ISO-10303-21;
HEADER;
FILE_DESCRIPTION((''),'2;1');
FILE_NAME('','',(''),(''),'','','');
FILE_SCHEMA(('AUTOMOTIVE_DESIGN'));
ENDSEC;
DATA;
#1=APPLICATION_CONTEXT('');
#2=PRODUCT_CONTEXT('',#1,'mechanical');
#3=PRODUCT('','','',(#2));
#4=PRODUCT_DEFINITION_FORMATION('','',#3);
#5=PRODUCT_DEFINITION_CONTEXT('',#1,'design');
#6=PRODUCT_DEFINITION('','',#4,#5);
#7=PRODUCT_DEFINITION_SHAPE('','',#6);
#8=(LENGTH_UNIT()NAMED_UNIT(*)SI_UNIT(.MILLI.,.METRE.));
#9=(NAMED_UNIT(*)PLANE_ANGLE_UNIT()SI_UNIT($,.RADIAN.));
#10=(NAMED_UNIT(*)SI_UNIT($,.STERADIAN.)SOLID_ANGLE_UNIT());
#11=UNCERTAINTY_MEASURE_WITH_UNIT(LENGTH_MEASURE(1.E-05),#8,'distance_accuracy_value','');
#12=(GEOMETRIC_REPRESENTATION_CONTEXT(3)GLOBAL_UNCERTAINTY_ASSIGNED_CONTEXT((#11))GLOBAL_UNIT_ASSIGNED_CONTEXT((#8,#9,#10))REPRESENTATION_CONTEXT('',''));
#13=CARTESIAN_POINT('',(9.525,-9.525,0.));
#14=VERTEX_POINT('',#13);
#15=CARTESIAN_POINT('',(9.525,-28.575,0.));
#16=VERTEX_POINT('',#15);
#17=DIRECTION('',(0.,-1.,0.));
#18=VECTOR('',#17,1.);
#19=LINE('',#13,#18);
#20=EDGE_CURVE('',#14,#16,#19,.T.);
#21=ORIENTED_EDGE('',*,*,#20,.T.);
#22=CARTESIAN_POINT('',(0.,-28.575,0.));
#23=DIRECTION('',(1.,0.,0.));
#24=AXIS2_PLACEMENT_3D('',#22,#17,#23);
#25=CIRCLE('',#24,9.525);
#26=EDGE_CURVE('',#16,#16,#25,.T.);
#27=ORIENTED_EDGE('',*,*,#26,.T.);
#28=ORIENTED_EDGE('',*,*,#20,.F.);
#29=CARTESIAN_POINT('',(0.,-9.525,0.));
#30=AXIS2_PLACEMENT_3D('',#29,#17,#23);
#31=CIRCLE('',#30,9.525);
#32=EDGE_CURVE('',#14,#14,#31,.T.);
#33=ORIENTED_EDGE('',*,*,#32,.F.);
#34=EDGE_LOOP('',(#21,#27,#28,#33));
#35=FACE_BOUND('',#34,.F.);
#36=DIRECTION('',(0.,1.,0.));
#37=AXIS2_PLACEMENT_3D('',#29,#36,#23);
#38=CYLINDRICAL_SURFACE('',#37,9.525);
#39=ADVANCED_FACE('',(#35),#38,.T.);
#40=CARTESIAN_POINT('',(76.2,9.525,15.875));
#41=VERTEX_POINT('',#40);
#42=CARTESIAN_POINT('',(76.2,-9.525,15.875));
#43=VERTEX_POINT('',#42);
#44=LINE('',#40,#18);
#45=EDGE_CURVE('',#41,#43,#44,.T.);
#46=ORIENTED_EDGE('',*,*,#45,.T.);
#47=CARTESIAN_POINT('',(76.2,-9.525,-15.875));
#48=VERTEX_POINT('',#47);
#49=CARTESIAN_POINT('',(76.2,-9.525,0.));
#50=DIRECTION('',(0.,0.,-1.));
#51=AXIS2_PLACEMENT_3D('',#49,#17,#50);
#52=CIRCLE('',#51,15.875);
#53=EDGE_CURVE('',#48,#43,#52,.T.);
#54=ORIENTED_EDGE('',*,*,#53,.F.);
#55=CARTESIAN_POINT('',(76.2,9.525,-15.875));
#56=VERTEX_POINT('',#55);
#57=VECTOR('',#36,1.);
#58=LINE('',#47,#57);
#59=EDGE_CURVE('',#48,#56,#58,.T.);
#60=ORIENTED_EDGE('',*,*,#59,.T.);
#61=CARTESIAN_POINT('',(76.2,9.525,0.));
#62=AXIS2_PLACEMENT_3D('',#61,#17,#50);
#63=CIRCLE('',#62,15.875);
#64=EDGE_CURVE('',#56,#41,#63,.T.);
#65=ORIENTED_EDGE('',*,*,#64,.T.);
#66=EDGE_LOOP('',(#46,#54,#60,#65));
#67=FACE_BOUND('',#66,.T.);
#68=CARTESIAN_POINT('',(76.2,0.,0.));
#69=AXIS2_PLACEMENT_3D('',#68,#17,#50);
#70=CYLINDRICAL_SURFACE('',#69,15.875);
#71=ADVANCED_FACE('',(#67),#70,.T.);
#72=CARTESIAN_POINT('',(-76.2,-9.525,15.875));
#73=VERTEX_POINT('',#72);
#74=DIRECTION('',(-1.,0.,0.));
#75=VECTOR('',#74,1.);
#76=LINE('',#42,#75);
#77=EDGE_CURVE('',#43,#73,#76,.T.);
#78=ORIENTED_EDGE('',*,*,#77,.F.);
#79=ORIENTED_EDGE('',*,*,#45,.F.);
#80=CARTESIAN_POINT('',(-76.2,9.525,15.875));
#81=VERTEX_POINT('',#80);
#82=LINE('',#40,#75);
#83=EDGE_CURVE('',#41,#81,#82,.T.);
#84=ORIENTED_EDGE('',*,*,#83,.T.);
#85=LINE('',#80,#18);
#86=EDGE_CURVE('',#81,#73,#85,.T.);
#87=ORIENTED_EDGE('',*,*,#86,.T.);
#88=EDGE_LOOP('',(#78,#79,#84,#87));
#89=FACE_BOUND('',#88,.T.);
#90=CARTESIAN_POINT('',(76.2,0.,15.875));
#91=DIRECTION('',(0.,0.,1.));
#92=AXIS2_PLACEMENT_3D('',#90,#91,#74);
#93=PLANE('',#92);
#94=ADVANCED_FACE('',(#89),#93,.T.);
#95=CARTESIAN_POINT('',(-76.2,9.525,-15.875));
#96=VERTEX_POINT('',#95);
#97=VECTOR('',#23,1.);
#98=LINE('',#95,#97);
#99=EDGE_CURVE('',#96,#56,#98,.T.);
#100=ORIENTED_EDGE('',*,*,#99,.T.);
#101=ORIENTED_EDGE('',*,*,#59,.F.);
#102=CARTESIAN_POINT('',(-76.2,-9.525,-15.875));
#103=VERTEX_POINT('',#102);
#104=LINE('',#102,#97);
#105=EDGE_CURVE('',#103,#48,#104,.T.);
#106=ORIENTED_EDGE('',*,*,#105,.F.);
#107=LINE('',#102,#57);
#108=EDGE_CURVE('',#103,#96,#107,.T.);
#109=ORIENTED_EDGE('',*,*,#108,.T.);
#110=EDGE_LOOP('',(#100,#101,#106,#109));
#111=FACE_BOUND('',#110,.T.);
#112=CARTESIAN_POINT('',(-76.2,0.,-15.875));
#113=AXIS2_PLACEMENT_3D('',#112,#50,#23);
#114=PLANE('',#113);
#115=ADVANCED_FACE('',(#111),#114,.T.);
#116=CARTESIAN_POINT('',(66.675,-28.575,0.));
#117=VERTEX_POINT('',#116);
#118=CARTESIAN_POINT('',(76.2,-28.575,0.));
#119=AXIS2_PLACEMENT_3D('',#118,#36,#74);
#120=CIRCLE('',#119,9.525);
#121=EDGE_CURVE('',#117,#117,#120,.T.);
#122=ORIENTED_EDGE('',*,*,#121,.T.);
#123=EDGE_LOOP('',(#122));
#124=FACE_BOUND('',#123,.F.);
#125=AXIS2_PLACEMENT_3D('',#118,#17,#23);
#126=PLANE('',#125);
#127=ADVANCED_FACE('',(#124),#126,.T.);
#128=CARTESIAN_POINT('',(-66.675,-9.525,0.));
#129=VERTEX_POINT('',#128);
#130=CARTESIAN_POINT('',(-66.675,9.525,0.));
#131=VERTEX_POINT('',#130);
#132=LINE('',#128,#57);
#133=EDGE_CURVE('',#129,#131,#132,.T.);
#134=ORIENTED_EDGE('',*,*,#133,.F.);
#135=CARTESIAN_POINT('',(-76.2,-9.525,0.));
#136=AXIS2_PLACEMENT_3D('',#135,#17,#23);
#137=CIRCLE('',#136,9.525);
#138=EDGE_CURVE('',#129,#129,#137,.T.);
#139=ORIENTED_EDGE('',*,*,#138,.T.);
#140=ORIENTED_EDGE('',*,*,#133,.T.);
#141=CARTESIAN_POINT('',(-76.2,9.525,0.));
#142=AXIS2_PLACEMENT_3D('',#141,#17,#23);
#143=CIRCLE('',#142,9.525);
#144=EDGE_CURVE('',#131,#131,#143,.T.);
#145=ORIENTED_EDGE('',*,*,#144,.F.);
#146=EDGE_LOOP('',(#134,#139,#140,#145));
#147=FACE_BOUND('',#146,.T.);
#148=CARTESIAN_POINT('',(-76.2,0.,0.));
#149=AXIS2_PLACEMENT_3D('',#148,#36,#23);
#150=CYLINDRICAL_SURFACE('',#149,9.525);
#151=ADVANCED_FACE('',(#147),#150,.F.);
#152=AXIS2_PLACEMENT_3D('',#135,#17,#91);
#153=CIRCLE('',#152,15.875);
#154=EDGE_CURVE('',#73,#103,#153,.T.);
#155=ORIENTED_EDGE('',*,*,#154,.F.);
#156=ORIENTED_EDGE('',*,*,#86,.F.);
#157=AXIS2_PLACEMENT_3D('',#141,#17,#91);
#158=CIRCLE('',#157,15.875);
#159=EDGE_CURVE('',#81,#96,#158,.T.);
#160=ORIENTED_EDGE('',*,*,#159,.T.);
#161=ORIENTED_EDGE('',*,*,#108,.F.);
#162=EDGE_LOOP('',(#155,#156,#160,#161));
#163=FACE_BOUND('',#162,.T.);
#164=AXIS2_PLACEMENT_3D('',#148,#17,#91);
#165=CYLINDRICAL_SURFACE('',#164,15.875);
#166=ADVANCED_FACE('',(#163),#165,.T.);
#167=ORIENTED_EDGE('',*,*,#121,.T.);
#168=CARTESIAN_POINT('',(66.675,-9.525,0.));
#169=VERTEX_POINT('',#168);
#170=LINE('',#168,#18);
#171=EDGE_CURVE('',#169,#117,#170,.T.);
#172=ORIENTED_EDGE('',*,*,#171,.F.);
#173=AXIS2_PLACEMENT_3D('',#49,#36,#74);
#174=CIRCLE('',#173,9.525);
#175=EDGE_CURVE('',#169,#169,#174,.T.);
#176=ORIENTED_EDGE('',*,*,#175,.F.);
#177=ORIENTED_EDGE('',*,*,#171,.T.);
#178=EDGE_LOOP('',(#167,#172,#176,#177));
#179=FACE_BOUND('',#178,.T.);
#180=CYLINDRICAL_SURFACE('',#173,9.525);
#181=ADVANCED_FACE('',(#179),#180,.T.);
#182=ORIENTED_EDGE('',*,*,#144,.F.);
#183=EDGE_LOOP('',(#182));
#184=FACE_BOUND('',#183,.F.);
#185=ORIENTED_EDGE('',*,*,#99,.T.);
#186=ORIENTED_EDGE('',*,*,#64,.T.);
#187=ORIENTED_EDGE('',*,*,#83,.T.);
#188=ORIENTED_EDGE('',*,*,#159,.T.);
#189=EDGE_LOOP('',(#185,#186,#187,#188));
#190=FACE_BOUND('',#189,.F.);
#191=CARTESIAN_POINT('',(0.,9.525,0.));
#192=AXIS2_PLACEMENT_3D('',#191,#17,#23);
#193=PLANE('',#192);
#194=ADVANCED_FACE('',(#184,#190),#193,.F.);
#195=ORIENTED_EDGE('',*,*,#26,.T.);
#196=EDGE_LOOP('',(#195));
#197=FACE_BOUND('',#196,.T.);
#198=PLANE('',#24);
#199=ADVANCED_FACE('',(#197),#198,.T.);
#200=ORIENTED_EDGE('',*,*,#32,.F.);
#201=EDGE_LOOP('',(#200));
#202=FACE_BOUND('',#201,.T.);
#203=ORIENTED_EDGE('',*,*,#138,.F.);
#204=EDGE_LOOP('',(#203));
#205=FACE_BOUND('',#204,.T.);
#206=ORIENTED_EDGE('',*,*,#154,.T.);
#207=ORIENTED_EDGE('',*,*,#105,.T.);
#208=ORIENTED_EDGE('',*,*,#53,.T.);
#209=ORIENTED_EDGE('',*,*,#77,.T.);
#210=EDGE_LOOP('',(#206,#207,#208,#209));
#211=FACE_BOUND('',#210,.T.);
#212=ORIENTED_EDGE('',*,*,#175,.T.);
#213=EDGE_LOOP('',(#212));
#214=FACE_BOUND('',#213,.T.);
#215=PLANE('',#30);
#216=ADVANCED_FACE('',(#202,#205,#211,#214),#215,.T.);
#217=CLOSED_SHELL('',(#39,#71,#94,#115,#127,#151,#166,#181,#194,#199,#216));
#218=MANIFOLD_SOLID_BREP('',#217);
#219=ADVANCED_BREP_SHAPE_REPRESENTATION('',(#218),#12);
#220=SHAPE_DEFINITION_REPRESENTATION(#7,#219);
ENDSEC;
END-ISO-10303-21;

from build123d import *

# Parameters (mm, degrees)
F0_R     = 9.525
F1_DEPTH = 9.525
F2_R     = 9.525
F3_DEPTH = 19.05


# Not quite as in the source:
# - a feature of the source that left no trace in its solid (it failed there, or was rolled back) is left out
# - a pattern or mirror of a feature is missing from the dataset's text; its kind, count and spacing are read off the source's solid


with BuildPart() as f1:
    # F0 (on Front) → F1 (new body, symmetric)
    with BuildSketch(Plane.XZ):
        with BuildLine():
            ThreePointArc((76.2, -15.875), (92.075, 0), (76.2, 15.875))
            Line((76.2, 15.875), (-76.2, 15.875))
            ThreePointArc((-76.2, 15.875), (-92.075, 0), (-76.2, -15.875))
            Line((-76.2, -15.875), (76.2, -15.875))
        make_face()
        with Locations((-76.2, 0)):
            Circle(F0_R, mode=Mode.SUBTRACT)
        with Locations((76.2, 0)):
            Circle(F0_R, mode=Mode.SUBTRACT)
        with Locations((76.2, 0)):
            Circle(F0_R)
    extrude(amount=F1_DEPTH, both=True)

    # F2 (on face) → F3 (join)
    with BuildSketch(Plane.XZ.offset(9.525)):
        Circle(F2_R)
    f3 = extrude(amount=F3_DEPTH)

    # F3_copies: F3 across plane
    add(f3.mirror(Plane(origin=(38.1, 0, 0), x_dir=(0, 0, 1), z_dir=(1, 0, 0))))


solid = f1.part
